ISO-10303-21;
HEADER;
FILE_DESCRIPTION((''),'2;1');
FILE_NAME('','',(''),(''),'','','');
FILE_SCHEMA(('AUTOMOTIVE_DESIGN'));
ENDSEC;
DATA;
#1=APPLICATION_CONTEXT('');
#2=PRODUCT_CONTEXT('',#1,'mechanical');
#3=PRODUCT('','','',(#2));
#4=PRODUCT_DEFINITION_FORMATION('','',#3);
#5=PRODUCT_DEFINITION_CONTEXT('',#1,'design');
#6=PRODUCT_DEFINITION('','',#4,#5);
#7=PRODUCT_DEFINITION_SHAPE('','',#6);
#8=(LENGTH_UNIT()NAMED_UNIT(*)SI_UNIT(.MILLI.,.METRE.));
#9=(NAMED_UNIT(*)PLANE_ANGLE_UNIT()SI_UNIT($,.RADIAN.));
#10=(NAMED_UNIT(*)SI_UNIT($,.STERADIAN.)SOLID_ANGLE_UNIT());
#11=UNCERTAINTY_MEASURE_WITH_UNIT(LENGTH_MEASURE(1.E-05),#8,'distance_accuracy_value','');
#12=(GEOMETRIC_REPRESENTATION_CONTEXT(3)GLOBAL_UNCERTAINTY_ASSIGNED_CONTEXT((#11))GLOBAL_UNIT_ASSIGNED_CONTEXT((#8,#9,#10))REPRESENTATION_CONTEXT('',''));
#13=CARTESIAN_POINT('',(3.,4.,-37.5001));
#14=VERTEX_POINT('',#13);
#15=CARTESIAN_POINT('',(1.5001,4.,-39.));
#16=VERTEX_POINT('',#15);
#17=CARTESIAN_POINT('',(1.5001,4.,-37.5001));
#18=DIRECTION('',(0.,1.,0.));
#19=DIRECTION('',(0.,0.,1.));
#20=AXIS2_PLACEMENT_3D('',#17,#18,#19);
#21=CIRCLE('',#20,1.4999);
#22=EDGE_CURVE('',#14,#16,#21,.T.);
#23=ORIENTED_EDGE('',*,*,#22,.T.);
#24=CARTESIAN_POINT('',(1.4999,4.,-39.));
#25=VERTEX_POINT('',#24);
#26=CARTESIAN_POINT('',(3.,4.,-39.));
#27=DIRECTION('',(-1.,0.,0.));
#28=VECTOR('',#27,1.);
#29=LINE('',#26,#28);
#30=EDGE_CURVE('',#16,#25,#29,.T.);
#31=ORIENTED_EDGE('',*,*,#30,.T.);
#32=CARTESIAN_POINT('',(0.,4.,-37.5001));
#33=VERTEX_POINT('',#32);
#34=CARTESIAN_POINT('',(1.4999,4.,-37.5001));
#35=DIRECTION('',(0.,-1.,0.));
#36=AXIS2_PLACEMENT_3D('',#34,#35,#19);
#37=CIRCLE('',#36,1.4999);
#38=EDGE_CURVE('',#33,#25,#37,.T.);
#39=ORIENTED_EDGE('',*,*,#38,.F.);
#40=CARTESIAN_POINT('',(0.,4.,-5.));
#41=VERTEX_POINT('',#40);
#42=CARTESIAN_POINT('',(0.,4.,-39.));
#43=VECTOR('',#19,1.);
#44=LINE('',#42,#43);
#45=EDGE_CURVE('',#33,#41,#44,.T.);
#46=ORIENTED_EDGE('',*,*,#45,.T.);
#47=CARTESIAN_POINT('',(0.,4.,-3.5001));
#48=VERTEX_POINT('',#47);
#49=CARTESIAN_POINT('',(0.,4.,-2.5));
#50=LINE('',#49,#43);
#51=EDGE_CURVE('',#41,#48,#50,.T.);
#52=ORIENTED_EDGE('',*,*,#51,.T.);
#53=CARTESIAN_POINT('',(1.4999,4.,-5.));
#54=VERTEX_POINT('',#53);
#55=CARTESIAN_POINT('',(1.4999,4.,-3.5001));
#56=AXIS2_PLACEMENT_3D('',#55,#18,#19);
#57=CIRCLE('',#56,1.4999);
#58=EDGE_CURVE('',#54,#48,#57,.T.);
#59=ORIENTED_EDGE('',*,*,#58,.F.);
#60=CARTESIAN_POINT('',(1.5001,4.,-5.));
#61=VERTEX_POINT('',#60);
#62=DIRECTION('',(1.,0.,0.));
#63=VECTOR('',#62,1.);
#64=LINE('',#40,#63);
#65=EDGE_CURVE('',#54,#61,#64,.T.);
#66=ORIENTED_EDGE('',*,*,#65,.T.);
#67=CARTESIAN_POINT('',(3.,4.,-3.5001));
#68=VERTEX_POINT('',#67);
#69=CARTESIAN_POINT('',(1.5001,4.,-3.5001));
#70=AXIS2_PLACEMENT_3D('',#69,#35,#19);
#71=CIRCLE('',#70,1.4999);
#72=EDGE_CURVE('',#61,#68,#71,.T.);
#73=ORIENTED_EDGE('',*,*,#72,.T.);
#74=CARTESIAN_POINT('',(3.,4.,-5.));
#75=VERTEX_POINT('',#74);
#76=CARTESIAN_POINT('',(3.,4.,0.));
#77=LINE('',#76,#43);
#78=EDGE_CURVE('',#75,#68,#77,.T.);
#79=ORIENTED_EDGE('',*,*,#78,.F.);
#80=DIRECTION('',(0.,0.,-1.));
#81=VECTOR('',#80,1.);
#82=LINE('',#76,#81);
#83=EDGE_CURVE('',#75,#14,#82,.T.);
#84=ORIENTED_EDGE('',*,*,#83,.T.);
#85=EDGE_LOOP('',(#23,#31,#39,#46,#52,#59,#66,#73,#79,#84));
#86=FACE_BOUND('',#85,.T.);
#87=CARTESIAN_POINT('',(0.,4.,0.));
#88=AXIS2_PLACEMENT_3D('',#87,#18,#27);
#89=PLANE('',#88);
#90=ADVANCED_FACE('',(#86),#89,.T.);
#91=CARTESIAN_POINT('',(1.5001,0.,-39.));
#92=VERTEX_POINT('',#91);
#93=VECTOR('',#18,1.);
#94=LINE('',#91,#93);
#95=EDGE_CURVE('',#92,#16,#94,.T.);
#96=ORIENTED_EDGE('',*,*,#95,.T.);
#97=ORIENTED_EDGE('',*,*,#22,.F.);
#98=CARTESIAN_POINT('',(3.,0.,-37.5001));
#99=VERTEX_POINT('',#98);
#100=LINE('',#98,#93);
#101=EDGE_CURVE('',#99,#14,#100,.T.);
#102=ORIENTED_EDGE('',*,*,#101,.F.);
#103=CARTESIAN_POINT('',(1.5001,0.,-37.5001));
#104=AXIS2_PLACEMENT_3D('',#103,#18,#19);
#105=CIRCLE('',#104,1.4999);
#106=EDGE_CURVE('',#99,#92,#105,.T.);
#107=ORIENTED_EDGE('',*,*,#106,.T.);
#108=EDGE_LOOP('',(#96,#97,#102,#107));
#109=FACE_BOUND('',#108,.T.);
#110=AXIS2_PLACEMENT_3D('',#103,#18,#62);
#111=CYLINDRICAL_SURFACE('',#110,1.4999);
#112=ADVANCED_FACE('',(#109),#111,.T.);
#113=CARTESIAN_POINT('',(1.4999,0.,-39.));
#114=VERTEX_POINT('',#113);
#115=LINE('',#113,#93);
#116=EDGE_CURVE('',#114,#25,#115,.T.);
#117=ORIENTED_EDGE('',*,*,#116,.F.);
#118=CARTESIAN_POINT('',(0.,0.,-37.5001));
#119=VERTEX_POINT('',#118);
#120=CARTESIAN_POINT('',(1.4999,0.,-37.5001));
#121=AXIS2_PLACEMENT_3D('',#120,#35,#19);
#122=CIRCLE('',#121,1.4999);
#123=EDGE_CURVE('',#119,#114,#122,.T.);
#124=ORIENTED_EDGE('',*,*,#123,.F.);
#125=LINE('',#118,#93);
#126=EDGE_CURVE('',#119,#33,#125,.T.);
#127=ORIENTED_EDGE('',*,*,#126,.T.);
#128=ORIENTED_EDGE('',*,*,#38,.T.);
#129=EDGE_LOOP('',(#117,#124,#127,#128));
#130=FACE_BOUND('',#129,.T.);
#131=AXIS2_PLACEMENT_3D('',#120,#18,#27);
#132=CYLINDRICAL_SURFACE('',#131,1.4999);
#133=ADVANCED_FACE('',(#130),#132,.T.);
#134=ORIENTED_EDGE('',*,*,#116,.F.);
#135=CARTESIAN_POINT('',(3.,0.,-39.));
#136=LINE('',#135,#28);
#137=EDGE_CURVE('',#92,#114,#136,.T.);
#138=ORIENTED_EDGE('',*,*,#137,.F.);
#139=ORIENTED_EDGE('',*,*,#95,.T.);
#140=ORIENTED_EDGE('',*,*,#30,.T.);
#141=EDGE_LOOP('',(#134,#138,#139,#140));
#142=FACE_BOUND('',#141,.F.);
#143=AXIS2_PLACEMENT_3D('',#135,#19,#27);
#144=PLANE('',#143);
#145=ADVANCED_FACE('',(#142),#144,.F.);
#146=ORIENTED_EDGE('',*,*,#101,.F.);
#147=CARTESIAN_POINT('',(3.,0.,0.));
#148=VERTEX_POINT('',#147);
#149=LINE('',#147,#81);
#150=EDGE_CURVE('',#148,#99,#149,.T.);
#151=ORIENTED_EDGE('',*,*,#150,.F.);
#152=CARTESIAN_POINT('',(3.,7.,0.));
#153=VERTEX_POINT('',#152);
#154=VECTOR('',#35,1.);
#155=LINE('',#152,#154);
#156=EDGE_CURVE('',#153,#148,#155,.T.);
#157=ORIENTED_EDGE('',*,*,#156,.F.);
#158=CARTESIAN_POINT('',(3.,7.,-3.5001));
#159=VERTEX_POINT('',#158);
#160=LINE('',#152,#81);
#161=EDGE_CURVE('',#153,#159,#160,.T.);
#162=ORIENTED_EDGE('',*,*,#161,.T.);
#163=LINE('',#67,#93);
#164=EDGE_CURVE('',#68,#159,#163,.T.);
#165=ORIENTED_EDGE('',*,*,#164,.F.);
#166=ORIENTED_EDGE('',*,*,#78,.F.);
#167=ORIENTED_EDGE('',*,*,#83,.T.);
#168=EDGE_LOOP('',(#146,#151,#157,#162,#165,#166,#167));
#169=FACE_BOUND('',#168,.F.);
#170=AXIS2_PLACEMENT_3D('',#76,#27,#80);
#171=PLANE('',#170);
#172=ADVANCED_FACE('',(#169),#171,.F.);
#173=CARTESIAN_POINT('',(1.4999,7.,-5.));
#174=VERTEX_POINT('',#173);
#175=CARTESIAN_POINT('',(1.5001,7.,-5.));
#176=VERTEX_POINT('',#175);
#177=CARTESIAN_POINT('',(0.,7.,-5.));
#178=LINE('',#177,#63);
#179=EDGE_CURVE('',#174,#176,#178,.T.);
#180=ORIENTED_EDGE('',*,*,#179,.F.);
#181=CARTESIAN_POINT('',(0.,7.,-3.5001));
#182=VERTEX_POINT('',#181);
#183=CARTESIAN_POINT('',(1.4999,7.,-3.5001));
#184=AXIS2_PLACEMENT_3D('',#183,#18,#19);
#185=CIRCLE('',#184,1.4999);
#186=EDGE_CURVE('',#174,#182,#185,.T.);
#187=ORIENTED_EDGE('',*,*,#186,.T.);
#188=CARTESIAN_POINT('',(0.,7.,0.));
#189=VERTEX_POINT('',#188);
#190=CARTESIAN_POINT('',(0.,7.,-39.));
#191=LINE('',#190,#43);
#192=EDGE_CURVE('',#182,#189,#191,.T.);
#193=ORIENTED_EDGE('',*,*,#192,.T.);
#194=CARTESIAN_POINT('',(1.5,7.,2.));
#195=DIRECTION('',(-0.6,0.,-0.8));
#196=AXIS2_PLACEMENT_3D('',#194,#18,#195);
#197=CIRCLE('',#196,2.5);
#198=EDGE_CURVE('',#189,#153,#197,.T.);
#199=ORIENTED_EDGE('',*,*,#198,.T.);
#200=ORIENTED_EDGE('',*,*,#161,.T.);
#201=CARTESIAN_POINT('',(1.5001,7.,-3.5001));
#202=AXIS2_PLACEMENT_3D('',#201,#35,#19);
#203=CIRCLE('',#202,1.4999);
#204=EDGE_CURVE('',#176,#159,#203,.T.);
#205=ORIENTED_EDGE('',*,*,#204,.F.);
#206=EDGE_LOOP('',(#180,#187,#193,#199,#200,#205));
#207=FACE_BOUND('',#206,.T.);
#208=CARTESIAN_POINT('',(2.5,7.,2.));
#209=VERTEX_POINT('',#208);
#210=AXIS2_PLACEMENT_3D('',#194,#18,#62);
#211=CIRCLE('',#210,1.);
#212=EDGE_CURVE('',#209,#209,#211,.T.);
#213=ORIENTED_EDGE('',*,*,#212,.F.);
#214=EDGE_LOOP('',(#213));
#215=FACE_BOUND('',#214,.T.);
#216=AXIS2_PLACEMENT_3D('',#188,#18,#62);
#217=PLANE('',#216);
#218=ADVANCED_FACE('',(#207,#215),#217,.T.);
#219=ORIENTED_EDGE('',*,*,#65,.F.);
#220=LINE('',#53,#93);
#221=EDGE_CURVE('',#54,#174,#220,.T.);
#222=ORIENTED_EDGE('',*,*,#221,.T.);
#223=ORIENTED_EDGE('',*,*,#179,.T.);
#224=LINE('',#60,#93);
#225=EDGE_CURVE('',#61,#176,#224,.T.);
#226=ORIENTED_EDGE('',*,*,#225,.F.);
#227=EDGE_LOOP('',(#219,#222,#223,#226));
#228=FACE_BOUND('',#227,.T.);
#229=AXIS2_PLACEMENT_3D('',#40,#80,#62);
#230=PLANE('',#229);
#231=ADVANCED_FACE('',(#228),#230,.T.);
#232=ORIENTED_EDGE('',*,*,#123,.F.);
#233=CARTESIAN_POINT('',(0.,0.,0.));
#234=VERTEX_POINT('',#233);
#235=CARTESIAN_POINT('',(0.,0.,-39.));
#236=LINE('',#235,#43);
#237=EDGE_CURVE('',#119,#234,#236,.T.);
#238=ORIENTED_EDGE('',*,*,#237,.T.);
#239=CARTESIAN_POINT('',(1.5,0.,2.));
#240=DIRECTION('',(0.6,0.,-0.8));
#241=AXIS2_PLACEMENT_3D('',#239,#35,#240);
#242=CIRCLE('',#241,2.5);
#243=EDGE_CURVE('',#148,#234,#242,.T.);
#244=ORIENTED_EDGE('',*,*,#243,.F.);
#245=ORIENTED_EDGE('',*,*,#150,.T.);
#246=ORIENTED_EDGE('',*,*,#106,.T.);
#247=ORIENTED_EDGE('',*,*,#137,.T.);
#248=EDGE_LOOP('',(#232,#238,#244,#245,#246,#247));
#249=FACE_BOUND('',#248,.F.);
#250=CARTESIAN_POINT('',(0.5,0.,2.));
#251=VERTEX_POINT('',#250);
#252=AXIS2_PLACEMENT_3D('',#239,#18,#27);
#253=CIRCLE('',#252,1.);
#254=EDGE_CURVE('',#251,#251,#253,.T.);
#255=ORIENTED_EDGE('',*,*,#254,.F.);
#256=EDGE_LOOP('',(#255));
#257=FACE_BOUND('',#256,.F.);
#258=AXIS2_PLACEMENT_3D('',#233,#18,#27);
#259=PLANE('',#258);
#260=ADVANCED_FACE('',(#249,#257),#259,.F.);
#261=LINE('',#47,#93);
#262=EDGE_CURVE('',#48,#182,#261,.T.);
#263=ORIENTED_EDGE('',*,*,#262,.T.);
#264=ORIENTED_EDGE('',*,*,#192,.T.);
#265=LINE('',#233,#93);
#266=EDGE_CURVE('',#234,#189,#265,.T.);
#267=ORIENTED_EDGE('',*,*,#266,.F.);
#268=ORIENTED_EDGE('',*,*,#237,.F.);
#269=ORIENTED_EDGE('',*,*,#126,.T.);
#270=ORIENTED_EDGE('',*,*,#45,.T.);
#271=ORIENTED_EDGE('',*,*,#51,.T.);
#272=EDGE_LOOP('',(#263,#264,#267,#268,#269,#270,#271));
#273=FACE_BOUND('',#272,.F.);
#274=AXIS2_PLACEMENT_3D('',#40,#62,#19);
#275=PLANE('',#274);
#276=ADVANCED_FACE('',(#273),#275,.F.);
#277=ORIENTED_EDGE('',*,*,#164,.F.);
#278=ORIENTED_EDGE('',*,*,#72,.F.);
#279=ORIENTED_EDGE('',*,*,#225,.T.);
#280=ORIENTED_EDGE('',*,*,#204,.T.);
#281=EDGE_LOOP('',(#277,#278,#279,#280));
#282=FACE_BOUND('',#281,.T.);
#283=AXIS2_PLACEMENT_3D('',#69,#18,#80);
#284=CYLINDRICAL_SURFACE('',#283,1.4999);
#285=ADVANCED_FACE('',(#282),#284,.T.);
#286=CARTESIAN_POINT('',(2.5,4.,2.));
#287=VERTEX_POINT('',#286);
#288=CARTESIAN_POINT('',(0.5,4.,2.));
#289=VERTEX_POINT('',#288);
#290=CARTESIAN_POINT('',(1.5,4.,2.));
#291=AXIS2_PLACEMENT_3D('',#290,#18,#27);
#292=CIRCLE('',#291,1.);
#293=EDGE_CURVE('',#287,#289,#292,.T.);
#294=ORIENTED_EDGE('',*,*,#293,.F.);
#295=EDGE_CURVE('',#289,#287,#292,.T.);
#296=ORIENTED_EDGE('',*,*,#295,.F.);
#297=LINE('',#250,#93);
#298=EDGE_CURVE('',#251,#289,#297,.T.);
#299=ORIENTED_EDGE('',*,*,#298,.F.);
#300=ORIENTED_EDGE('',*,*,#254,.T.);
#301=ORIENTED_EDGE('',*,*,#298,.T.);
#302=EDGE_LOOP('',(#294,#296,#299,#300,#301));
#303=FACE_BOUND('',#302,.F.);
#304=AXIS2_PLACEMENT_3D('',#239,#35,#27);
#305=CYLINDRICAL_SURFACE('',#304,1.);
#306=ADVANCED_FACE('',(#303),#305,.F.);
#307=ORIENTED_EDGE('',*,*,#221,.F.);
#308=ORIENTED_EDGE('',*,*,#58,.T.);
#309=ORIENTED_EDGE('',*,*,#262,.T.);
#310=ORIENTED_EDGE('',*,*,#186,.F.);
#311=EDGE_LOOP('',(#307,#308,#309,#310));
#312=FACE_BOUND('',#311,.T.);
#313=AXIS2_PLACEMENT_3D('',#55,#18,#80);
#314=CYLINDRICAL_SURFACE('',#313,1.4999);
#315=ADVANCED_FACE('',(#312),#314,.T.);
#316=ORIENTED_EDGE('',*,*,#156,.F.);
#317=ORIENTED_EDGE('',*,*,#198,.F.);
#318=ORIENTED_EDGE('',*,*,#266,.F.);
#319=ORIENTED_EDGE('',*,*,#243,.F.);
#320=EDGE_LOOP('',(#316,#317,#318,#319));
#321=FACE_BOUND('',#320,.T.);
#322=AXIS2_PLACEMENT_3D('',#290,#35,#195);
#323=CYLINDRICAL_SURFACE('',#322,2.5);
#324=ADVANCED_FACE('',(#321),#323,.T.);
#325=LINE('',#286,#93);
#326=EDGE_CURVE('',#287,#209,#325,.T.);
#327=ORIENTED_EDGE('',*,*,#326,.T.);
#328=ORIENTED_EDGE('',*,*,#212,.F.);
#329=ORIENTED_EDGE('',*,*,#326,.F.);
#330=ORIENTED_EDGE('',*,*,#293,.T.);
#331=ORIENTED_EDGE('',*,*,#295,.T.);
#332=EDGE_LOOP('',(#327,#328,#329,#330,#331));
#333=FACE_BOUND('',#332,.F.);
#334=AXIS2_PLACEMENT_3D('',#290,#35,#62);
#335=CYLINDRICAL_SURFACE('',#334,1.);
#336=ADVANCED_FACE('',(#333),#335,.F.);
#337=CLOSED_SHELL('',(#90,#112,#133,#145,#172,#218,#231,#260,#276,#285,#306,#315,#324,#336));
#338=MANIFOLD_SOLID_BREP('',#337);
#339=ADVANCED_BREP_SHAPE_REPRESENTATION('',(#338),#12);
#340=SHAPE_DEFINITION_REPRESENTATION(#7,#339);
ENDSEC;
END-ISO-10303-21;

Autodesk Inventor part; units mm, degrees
ref_plane "YZ Plane" through (0, 0, 0) normal (1, 0, 0) x (0, 1, 0)
ref_plane "XZ Plane" through (0, 0, 0) normal (0, 1, 0) x (-1, 0, 0)
ref_plane "XY Plane" through (0, 0, 0) normal (0, 0, 1) x (1, 0, 0)
sketch "Sketch1" plane through (0, 0, 0) normal (0, 1, 0) x (-1, 0, 0)
  line L0 (0, 0) -> (-3, 0)
  line L1 (-3, 0) -> (-3, -39)
  line L2 (-3, -39) -> (0, -39)
  line L3 (0, -39) -> (0, 0)
  circle A0 centre (-1.5, 2) radius 2.5
  circle A1 centre (-1.5, 2) radius 1
  dimension "d0" = 39
  dimension "d1" = 3
  dimension "d2" = 5
  dimension "d3" = 2
extrude "Base" add sketch "Sketch1" along normal blind 4
sketch "Sketch2" plane through (0, 4, 0) normal (0, 1, 0) x (1, 0, 0)
  line L0 (0, 39) -> (0, 0) projected
  line L1 (3, 0) -> (3, 39) projected
  circle A0 centre (1.5, -2) radius 1 projected
  arc A1 (0, 0) -> (3, 0) centre (1.5, -2) ccw projected
  line L2 (3, 0) -> (3, 39) projected
  line L3 (3, 39) -> (0, 39) projected
  line L4 (0, 39) -> (0, 0) projected
  line L5 (0, 5) -> (3, 5)
  dimension "d8" = 5
extrude "Superior" add sketch "Sketch2" along normal blind 3 contours L5 L1 A1 L0
fillet "Biselado" radius 1.5 4 edges at (3, 5.5, -5) (0, 5.5, -5) (3, 2, -39) (0, 2, -39)
equation "\"d0\" = traba_largo"
equation "\"d1\" = traba_ancho"
equation "\"d2\" = traba_diametro"
equation "\"d3\" = traba_diametro_perforacion"
equation "\"d4\" = traba_alto"
equation "\"d8\" = traba_top_largo"
equation "\"d9\" = traba_top_alto"
equation "\"d11\" = 0.5 * traba_ancho"
equation "\"base_alto\" = 3"
equation "\"deslizador_alto\" = 3"
equation "\"deslizador_alto_1\" = 3"
equation "\"deslizador_interruptor_ancho\" = 7"
equation "\"deslizador_interruptor_largo\" = 5"
equation "\"deslizador_largo\" = 144"
equation "\"deslizador_saliente\" = 5"
equation "\"deslizador_soporte_alto\" = 4"
equation "\"deslizador_soporte_ancho\" = 5"
equation "\"deslizador_tope_alto\" = 5"
equation "\"hoja_alto\" = 3"
equation "\"hoja_cola_biselado\" = 1"
equation "\"hoja_filo_biselado\" = 0.5"
equation "\"hoja_stop_biselado\" = 2"
equation "\"hoja_stop_largo\" = 5"
equation "\"hoja_stop_posicion\" = 5"
equation "\"hoja_stop_saliente\" = 5"
equation "\"margen\" = 0.3"
equation "\"muros_grosor\" = 3"
equation "\"rail_alto\" = 1.5"
equation "\"rail_grosor\" = 5"
equation "\"tirador_agarre_largo\" = 3"
equation "\"traba_largo\" = 39"
equation "\"traba_ancho\" = 3"
equation "\"traba_diametro\" = 5"
equation "\"traba_diametro_perforacion\" = 2"
equation "\"traba_alto\" = 4"
equation "\"traba_top_largo\" = 5"
equation "\"traba_top_alto\" = 3"
equation "\"base_separacion_agujeros\" = 4"
equation "\"base_agujeros_separacion\" = 3.5"
equation "\"base_agujeros_diametro\" = 2"
properties part number "Traba"
